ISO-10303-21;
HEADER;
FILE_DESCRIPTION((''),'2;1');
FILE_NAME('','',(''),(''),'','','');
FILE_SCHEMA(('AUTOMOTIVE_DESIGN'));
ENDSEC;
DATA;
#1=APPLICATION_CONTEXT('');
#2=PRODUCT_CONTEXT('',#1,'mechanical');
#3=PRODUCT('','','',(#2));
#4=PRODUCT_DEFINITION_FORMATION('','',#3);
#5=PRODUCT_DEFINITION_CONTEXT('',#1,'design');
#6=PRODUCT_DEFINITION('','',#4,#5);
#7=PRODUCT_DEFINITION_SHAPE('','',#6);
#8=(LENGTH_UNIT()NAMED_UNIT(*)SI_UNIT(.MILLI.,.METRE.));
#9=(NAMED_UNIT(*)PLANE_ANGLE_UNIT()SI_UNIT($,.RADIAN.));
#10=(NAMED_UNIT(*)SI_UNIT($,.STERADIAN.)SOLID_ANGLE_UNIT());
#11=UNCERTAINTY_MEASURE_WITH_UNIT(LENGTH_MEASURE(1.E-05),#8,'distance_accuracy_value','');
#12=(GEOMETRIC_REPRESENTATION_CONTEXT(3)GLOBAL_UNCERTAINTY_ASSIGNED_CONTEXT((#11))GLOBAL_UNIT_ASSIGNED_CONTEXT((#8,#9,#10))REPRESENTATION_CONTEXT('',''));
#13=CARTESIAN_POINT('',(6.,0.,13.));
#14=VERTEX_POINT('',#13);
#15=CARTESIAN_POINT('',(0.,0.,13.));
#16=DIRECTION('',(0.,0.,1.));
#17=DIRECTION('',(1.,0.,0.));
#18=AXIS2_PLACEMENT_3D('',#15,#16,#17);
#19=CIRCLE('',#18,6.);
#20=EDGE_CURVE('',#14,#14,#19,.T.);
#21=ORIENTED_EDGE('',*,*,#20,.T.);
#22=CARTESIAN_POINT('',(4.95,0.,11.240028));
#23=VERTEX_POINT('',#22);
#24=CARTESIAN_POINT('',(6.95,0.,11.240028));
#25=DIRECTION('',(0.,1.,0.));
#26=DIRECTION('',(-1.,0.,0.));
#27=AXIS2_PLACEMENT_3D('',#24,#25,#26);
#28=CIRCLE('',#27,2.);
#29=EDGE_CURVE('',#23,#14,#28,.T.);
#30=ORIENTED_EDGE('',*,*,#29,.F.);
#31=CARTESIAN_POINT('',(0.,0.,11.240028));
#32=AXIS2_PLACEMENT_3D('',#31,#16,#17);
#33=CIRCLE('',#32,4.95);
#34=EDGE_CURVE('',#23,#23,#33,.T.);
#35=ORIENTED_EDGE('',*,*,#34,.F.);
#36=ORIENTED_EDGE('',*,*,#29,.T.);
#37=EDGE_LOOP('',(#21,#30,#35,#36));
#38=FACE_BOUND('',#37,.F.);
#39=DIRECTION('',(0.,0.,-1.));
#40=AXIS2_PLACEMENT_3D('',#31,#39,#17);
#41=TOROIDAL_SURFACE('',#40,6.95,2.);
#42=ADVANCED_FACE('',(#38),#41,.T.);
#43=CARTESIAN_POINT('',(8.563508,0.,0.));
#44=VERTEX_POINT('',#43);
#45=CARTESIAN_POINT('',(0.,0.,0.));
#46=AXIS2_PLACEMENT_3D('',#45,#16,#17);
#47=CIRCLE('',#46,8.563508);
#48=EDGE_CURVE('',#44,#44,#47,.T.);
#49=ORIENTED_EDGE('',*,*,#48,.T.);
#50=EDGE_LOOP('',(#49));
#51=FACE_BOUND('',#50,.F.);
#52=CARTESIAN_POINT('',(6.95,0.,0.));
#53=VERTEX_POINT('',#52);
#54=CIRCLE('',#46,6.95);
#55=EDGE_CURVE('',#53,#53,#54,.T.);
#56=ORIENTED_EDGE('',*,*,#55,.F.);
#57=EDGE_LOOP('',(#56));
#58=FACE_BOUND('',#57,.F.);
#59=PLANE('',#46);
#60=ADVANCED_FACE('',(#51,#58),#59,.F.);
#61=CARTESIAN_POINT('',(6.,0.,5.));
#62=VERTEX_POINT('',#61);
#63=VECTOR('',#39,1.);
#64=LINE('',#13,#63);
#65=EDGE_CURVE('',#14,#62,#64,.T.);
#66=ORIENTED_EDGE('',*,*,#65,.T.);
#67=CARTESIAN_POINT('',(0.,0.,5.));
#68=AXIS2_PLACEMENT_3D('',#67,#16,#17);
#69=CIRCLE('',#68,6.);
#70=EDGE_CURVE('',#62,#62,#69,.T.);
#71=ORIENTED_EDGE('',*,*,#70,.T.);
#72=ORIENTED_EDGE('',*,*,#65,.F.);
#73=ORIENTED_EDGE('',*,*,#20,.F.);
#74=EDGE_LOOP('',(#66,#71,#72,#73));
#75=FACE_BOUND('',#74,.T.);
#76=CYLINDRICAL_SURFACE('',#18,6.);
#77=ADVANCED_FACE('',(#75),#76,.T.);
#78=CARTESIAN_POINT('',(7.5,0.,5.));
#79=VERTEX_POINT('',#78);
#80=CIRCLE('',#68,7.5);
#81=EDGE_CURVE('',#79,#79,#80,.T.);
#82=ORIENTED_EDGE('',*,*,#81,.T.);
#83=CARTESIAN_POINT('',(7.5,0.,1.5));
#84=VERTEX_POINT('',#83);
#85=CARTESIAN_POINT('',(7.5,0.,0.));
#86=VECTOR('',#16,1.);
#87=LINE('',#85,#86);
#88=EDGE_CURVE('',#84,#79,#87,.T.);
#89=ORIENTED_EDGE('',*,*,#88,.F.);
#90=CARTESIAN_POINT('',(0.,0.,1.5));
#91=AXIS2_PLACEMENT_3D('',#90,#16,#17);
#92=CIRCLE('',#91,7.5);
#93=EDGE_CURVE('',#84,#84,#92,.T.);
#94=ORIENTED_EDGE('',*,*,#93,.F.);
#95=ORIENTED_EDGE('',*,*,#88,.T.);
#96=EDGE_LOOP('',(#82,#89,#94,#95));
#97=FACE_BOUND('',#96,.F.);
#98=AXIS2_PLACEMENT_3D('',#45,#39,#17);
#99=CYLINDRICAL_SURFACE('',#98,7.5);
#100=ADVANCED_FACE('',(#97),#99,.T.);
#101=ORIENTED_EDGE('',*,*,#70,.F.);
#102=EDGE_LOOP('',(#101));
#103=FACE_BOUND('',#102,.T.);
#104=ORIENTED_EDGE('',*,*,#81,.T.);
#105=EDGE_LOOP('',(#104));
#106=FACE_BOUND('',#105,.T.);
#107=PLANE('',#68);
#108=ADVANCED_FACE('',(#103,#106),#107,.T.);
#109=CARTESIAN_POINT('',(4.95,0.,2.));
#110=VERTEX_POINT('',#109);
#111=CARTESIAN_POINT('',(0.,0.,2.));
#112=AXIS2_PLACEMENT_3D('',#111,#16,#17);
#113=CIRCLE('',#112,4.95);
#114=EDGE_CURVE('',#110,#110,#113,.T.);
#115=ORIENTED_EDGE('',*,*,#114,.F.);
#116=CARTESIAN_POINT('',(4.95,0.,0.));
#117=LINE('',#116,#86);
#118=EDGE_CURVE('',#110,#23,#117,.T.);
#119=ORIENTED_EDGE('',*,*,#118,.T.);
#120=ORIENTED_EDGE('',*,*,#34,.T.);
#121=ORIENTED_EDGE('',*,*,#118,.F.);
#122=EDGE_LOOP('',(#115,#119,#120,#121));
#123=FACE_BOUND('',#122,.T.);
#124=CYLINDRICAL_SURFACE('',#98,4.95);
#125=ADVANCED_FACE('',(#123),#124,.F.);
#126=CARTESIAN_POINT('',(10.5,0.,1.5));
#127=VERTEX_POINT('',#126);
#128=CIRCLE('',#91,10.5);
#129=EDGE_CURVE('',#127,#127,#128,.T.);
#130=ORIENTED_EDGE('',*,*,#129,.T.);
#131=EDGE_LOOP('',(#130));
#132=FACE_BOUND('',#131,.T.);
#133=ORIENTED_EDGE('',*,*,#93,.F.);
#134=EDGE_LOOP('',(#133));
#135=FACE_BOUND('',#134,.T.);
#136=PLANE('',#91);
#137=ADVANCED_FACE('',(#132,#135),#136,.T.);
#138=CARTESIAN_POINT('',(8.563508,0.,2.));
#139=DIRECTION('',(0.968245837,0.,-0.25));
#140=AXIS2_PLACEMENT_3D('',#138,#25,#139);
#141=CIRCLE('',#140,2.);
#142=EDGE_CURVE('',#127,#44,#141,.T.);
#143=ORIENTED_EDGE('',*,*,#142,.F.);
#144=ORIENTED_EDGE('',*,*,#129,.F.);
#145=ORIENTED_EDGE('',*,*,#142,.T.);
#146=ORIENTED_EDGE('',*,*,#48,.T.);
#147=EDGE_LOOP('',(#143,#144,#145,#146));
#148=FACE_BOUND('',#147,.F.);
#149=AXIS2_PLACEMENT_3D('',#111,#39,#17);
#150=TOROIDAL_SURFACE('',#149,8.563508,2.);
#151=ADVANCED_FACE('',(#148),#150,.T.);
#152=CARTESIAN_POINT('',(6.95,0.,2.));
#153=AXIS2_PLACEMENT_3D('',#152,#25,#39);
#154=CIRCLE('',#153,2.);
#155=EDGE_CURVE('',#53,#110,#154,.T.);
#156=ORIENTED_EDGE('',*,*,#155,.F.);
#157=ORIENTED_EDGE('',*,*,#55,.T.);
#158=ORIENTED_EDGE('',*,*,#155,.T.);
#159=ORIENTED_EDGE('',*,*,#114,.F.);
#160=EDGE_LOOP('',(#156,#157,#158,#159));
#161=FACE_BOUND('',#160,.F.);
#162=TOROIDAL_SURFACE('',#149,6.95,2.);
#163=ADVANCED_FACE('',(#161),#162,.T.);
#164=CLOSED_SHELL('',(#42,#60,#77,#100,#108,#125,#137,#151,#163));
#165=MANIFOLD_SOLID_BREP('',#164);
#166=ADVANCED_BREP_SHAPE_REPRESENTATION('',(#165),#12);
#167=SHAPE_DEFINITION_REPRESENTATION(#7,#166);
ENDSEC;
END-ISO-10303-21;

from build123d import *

# Parameters (mm, degrees)
F0_R     = 10.5
F0_R_2   = 7.5
F1_DEPTH = 1.5
F0_R_3   = 4.95
F2_DEPTH = 13
F4_R     = 7.5
F4_R_2   = 6
F5_DEPTH = 8


# Not quite as in the source:
# - a fillet or chamfer that OpenCascade refuses, or shapes differently, is made with other operations: its cross-section is extruded or revolved along the edge and cut away or added
# - a feature names something its author has since deleted; it is built from what else it names


with BuildPart() as f1:
    # F0 (on Top) → F1 (new body)
    with BuildSketch(Plane.XY):
        Circle(F0_R)
        Circle(F0_R_2, mode=Mode.SUBTRACT)
    extrude(amount=F1_DEPTH)

    # F0 (on Top) → F2 (join)
    with BuildSketch(Plane.XY):
        Circle(F0_R_2)
        Circle(F0_R_3, mode=Mode.SUBTRACT)
    extrude(amount=F2_DEPTH)

    # F3: fillet of radius 2 on 1 edges, made by hand

    # F3_s1 → F3_t2 (revolve, cut)
    with BuildSketch(Plane.XZ):
        with BuildLine():
            ThreePointArc((10.5, 1.5), (9.7882531983, 0.4188611699), (8.5635083269, 0))
            Line((8.5635083269, 0), (10.5, 0))
            Line((10.5, 0), (10.5, 1.5))
        make_face()
    revolve(axis=Axis((0, 0, 0), (0, 0, 1)), mode=Mode.SUBTRACT)

    # F4 (on face) → F5 (cut)
    with BuildSketch(Plane.XY.offset(13)):
        Circle(F4_R)
        Circle(F4_R_2, mode=Mode.SUBTRACT)
    extrude(amount=-F5_DEPTH, mode=Mode.SUBTRACT)

    # F6: fillet of radius 2 on 2 edges, made by hand

    # F6_s1 → F6_t2 (revolve, cut)
    with BuildSketch(Plane.XZ):
        with BuildLine():
            ThreePointArc((6.95, 0), (5.5357864376, 0.5857864376), (4.95, 2))
            Line((4.95, 2), (4.95, 0))
            Line((4.95, 0), (6.95, 0))
        make_face()
    revolve(axis=Axis((0, 0, 0), (0, 0, 1)), mode=Mode.SUBTRACT)

    # F6_s3 → F6_t4 (revolve, cut)
    with BuildSketch(Plane.XZ):
        with BuildLine():
            ThreePointArc((4.95, 11.2400284093), (5.2324435963, 12.2647234859), (6, 13))
            Line((6, 13), (4.95, 13))
            Line((4.95, 13), (4.95, 11.2400284093))
        make_face()
    revolve(axis=Axis((0, 0, 13), (0, 0, 1)), mode=Mode.SUBTRACT)


solid = f1.part
